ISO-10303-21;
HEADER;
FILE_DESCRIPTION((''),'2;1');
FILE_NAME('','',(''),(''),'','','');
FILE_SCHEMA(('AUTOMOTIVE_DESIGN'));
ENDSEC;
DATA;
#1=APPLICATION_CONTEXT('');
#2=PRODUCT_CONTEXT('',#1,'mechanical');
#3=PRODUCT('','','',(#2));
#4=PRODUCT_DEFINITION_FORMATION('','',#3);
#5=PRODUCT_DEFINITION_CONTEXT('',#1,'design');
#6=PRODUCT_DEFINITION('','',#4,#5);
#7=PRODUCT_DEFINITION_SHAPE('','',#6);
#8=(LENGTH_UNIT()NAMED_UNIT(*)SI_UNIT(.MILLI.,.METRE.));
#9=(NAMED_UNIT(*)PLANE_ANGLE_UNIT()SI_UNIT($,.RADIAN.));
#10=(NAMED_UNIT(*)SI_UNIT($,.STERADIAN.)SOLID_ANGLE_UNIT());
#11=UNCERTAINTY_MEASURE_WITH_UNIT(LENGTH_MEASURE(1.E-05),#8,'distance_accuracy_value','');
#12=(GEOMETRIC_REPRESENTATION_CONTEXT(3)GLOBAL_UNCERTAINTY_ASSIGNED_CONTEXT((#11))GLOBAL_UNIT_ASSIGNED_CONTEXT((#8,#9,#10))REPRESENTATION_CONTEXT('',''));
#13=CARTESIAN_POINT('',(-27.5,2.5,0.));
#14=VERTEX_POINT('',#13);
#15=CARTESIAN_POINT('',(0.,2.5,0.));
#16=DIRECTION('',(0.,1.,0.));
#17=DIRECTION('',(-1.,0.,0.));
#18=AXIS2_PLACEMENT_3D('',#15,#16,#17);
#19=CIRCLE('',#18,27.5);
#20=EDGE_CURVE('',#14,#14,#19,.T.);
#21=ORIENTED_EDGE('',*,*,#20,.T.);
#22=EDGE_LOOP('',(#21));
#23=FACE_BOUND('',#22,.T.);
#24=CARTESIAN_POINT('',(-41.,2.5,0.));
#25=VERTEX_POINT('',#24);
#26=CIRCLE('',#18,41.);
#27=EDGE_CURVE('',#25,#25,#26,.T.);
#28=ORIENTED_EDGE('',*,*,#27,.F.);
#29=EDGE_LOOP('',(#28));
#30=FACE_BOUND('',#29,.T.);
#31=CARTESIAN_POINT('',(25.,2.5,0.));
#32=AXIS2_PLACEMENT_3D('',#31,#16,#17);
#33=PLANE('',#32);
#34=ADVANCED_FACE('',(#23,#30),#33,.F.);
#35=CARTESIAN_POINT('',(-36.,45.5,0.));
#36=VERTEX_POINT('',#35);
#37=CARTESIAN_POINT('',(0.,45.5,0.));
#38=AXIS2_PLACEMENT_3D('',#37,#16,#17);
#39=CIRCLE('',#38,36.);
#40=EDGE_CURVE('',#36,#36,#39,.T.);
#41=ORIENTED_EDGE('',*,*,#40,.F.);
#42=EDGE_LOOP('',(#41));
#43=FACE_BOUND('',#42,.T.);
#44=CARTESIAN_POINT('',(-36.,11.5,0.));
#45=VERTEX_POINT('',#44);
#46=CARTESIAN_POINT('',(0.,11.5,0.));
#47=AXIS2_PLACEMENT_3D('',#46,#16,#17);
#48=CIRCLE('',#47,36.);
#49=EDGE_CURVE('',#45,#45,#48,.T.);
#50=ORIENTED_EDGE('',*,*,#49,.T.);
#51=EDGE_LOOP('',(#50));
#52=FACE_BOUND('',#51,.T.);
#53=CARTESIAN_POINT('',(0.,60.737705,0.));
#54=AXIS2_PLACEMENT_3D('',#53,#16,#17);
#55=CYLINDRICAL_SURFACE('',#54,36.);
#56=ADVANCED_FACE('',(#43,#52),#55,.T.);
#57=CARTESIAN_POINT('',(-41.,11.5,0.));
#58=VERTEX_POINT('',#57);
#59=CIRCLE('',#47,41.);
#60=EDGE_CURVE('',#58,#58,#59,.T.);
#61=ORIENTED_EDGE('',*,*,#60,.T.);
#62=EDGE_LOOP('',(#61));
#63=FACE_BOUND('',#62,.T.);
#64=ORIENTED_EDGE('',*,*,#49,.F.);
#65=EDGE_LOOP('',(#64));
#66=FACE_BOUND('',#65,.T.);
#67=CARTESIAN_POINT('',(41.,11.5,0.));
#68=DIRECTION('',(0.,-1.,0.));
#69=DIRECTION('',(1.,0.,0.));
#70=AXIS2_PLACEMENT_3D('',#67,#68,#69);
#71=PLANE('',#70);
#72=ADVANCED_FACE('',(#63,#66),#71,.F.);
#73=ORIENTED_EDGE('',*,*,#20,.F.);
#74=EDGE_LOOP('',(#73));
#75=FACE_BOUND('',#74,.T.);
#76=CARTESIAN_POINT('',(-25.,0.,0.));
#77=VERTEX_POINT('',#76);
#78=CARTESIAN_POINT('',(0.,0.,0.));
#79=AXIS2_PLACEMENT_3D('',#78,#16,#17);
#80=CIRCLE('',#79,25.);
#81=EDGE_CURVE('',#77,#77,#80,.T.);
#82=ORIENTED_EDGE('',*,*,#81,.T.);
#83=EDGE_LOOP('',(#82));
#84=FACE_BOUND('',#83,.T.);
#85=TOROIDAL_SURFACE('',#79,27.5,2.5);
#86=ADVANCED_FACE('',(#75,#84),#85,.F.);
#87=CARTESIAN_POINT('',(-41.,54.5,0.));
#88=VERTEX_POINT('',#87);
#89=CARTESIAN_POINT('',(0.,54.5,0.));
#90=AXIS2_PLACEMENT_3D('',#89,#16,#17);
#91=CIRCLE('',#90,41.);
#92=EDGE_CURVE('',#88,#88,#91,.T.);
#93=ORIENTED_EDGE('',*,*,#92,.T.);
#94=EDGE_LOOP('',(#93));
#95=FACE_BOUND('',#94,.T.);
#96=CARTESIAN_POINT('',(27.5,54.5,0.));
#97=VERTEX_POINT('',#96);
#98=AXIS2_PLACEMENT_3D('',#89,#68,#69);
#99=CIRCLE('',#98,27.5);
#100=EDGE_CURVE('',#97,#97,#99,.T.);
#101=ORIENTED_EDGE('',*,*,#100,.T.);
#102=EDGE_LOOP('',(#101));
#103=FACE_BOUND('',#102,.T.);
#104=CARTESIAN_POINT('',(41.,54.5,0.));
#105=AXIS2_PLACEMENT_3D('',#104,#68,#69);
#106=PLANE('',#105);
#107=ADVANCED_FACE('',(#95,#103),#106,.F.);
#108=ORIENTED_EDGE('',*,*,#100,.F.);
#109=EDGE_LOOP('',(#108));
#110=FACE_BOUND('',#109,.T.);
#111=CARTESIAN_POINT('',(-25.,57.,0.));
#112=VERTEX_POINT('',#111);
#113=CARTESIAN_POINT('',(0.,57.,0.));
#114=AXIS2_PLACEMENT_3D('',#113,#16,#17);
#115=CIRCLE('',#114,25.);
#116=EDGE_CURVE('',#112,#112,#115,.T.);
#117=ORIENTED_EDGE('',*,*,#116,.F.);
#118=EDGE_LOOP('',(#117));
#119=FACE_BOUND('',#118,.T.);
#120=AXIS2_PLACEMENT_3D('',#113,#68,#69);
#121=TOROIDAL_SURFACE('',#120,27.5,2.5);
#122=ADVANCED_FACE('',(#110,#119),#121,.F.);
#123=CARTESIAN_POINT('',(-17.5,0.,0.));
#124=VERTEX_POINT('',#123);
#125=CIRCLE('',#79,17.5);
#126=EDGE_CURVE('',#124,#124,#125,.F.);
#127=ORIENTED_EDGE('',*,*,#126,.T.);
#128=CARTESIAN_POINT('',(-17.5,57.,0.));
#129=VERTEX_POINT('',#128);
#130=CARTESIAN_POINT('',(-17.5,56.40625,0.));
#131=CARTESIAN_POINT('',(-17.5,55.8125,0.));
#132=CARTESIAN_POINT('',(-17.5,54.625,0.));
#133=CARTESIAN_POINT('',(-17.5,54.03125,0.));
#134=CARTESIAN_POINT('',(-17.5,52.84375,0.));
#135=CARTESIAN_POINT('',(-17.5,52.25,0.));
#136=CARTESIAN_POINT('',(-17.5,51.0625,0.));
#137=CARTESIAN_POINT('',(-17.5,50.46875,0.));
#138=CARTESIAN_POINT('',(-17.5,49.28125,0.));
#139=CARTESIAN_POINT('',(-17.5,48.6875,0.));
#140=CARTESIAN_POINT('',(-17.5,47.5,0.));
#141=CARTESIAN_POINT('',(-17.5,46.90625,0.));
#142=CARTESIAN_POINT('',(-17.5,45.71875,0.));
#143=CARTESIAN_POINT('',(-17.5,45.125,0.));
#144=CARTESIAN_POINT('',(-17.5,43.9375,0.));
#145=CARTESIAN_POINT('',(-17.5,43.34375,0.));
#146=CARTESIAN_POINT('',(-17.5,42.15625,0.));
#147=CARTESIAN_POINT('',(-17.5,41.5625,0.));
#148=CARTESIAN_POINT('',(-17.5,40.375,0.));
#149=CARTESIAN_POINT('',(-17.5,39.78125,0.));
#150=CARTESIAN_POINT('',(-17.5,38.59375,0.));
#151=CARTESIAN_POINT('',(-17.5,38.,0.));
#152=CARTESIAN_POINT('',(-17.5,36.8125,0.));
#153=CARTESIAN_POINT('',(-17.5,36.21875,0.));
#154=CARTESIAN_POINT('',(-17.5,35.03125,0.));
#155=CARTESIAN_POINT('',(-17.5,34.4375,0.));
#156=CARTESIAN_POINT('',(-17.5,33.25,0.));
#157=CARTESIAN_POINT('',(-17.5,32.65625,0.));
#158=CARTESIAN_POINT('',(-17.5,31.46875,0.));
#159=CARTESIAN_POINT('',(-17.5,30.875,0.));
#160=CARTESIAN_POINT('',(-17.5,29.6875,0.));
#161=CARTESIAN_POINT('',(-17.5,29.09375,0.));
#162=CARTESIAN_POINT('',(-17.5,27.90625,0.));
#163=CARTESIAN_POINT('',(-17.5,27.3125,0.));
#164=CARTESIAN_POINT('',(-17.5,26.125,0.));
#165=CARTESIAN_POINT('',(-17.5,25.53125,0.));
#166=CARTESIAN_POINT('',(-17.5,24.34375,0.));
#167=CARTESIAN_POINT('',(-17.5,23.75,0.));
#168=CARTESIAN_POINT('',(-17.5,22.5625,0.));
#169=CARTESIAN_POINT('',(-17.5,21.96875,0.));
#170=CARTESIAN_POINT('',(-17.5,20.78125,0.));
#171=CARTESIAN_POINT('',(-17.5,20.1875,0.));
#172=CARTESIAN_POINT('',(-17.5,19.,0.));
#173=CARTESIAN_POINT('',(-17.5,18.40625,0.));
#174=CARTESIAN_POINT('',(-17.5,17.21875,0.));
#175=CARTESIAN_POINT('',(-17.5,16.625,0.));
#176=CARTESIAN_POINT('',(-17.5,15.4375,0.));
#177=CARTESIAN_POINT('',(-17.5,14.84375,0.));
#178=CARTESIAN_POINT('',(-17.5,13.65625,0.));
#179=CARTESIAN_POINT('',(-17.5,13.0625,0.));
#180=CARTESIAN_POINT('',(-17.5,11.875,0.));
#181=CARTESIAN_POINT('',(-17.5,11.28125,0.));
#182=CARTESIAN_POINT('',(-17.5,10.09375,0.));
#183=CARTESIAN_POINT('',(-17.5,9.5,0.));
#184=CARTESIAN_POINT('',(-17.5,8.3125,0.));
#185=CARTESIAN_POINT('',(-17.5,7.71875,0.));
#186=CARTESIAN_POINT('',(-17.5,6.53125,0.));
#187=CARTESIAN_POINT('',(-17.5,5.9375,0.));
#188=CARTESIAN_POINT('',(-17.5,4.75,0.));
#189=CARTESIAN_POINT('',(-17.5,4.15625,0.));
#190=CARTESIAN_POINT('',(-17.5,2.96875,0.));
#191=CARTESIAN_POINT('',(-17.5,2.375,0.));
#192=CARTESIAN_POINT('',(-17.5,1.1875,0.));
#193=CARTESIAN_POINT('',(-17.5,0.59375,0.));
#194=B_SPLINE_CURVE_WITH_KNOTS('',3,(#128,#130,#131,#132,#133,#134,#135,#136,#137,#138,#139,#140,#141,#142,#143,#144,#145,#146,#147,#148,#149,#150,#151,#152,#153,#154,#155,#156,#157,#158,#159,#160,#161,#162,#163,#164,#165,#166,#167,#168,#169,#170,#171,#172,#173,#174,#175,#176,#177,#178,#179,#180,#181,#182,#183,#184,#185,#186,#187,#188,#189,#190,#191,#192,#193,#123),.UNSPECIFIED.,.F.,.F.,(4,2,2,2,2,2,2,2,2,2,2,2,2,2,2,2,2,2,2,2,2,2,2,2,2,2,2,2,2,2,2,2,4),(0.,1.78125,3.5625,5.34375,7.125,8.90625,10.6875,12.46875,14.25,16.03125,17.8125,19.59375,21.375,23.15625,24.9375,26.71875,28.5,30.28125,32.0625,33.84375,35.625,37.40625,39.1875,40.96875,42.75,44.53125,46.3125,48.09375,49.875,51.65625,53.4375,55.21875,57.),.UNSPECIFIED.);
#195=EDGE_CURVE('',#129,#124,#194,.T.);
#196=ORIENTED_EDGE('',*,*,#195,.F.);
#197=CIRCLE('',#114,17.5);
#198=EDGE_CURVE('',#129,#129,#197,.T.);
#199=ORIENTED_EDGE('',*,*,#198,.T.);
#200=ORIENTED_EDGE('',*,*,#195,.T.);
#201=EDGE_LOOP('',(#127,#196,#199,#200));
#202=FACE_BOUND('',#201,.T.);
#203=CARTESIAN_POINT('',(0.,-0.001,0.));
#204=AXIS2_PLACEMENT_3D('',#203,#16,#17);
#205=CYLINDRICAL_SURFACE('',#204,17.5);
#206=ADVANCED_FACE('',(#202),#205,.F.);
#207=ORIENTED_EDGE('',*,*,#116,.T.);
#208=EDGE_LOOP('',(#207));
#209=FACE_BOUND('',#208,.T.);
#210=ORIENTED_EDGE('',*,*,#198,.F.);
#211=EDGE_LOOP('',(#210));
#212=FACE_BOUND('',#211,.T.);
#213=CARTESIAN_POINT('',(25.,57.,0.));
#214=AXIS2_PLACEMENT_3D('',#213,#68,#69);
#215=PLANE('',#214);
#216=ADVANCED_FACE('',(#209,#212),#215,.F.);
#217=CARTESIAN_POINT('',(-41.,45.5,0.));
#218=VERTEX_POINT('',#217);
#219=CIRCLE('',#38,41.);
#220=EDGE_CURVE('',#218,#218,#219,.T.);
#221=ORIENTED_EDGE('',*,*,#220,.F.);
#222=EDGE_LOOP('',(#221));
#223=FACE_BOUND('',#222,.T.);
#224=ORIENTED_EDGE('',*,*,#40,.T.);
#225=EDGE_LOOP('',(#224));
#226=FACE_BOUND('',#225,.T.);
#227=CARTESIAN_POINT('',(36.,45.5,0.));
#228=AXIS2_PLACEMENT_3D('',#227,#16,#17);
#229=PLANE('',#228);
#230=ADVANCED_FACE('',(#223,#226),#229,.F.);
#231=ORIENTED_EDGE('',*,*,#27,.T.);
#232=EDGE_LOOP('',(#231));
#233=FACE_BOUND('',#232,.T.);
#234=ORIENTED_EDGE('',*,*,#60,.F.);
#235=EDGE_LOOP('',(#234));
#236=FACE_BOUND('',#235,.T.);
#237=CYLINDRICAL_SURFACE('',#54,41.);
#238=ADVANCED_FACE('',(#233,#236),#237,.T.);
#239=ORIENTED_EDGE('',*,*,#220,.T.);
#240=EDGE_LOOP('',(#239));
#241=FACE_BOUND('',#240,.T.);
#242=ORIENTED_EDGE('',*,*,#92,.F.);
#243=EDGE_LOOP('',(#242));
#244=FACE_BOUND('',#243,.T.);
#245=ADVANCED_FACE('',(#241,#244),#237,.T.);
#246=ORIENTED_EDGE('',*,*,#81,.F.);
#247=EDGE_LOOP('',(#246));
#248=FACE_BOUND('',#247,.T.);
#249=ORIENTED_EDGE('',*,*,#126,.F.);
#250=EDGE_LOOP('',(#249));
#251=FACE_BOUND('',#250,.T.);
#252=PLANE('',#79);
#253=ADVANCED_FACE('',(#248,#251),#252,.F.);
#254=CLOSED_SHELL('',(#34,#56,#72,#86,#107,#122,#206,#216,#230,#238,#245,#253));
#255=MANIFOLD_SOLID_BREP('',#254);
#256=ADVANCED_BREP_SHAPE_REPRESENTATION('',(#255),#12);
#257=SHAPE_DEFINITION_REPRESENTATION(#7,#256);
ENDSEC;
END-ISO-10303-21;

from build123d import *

# Parameters (mm, degrees)
CUT_EXTRUDE1_REACH = 83.308
SKETCH2_R          = 17.5
FILLET1_R          = 2.5


with BuildPart() as part:
    # Sketch1 → Revolve1 (revolve)
    with BuildSketch(Plane.XY, mode=Mode.PRIVATE) as revolve1_sk:
        Polygon((0, 0), (25, 0), (25, 2.5), (41, 2.5), (41, 11.5), (36, 11.5), (36, 45.5), (41, 45.5), (41, 54.5), (25, 54.5), (25, 57), (0, 57), align=None)
    revolve(revolve1_sk.sketch.rotate(Axis((0, 60.737704918, 0), (0, -1, 0)), 180), axis=Axis((0, 60.737704918, 0), (0, -1, 0)))

    # Sketch2 → Cut-Extrude1 (cut, up to next)
    with BuildSketch(Plane(origin=(0, 57, 0), x_dir=(1, 0, 0), z_dir=(0, 1, 0)), mode=Mode.PRIVATE) as cut_extrude1_sk1:
        with Locations(Location((0, 0, 0), (0, 0, 180))):
            Circle(SKETCH2_R)
    cut_extrude1_tool1 = extrude(cut_extrude1_sk1.sketch, amount=-CUT_EXTRUDE1_REACH, mode=Mode.PRIVATE) & part.part
    add(cut_extrude1_tool1.solids().sort_by_distance((0, 57, 0))[0], mode=Mode.SUBTRACT)

    # Fillet1
    fillet1_edges = [part.edges().sort_by_distance(p)[0] for p in [
        (25, 54.5, 0),
        (25, 2.5, 0),
    ]]
    fillet(fillet1_edges, radius=FILLET1_R - 0.0001)  # a hair under: the kernel refuses the full size


solid = part.part
